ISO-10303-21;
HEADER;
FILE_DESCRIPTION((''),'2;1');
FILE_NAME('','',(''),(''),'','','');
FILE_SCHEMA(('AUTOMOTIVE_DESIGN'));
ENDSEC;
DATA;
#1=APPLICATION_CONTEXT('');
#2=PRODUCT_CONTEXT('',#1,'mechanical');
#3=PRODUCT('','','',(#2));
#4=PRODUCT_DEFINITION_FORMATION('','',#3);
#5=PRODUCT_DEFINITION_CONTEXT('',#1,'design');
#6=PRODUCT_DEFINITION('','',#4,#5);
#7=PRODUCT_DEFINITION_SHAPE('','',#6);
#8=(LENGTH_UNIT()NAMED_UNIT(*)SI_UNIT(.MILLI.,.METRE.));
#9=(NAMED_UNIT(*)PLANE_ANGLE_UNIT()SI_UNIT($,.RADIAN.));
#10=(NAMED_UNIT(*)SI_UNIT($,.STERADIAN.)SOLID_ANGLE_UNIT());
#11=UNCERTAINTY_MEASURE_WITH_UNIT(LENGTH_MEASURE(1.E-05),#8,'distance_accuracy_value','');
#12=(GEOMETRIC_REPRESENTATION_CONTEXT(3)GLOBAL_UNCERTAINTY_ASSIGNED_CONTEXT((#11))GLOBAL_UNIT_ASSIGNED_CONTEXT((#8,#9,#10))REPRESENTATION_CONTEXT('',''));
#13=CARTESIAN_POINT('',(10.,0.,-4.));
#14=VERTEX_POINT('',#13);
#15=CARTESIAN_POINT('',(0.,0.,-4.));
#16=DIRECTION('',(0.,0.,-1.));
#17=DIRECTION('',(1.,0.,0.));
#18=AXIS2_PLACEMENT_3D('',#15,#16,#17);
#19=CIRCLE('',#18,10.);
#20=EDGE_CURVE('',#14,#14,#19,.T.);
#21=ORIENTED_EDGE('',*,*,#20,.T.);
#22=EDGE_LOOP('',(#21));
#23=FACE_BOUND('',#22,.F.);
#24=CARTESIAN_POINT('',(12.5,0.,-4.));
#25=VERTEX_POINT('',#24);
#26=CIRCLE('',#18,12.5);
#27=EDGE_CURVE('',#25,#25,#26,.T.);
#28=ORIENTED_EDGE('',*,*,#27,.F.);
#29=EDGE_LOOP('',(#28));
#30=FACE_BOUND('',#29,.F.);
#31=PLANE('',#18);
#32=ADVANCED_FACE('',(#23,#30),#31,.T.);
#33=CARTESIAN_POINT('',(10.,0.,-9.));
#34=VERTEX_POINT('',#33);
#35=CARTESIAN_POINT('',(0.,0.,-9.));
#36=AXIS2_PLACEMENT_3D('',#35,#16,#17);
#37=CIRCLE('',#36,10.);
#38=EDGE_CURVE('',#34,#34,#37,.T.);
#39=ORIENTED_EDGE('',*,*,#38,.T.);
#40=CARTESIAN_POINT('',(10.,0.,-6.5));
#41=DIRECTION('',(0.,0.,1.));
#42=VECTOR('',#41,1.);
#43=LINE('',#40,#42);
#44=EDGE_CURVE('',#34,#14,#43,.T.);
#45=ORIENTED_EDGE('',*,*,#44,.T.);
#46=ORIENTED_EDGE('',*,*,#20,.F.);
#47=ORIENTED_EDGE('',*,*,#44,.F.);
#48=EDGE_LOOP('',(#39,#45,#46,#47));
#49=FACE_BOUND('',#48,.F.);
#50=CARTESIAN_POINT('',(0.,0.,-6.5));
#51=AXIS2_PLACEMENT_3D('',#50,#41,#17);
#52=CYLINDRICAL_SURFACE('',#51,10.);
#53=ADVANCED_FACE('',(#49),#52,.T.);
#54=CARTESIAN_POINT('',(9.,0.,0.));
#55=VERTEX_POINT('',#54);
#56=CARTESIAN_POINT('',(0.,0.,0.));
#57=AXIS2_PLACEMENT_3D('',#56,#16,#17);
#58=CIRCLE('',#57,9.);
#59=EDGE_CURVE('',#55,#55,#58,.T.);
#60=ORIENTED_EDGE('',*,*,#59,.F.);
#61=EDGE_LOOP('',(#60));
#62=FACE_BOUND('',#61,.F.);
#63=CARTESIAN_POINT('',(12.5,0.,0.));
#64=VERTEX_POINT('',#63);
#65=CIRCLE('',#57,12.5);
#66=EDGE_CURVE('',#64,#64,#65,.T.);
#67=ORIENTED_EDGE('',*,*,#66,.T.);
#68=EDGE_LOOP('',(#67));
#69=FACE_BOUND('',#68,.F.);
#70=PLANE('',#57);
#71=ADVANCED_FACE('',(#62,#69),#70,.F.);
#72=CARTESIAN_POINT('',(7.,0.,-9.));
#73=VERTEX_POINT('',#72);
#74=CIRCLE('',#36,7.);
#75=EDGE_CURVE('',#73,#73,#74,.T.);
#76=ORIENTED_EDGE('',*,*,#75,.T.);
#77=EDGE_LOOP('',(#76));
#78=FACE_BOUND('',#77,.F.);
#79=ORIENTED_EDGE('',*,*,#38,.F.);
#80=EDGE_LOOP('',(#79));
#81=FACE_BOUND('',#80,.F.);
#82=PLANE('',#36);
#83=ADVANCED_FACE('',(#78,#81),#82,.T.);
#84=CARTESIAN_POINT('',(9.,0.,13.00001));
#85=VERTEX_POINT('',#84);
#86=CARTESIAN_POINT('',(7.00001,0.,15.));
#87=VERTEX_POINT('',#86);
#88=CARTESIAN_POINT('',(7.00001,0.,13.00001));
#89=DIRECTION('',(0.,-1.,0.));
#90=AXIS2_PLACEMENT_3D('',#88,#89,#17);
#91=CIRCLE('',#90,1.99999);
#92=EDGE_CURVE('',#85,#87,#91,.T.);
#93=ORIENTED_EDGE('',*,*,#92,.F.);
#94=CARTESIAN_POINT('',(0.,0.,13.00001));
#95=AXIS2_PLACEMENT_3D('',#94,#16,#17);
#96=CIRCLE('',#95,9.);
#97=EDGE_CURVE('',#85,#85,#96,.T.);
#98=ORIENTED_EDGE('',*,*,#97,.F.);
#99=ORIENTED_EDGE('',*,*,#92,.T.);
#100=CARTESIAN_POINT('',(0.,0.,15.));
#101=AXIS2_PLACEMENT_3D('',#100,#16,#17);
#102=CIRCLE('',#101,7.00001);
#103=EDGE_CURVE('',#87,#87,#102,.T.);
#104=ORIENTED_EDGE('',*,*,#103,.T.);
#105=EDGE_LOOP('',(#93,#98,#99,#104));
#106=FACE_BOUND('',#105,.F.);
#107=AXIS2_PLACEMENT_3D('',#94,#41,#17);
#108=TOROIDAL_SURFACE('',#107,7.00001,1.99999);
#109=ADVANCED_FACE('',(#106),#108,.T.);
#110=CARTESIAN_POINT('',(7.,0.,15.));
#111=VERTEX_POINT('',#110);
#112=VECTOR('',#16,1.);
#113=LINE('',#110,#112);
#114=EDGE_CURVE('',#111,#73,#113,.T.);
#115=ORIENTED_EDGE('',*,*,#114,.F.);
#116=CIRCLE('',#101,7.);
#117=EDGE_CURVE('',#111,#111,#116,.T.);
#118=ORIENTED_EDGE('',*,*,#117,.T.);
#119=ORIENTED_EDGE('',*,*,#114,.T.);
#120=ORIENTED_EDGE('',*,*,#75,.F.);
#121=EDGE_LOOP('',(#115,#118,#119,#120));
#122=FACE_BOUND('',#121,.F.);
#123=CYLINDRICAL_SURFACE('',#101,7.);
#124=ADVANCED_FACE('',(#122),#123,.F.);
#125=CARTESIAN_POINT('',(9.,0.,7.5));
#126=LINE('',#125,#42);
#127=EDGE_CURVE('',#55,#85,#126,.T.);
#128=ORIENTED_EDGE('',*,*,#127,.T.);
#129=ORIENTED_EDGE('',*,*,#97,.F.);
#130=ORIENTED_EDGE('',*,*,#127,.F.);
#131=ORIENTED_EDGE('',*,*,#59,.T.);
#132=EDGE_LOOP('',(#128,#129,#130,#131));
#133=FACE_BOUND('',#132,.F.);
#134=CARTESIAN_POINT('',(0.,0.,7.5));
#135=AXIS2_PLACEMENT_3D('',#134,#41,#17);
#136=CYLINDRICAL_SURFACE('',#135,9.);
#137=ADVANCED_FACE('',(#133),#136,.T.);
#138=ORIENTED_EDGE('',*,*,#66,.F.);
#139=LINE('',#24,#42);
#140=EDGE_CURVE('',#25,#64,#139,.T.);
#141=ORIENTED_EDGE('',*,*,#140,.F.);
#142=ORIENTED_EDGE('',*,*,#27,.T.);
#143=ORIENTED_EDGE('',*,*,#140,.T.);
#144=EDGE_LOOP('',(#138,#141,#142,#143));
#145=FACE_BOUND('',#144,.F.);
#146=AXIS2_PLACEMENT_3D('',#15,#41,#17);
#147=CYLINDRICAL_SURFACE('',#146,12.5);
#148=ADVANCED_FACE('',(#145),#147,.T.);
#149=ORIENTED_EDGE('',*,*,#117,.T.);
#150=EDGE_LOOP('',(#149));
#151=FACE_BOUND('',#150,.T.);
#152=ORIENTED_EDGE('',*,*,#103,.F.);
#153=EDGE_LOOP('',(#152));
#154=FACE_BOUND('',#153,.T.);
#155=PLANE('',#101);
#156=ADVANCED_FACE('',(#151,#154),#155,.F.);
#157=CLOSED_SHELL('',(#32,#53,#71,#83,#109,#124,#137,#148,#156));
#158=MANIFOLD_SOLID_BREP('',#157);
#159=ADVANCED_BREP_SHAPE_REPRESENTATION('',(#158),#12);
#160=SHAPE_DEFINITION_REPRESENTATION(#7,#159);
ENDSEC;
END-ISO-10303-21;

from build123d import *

# Parameters (mm, degrees)
F0_W   = 2
F0_H   = 15
F0_W_2 = 3
F0_H_2 = 5
F2_R   = 1.99999


# Not quite as in the source:
# - a fillet or chamfer is up to 0.001 mm smaller than in the source, because OpenCascade refuses the exact size


with BuildPart() as f1:
    # F0 (on Front) → F1 (revolve)
    with BuildSketch(Plane.XZ):
        with Locations((8, 7.5)):
            Rectangle(F0_W, F0_H)
        Polygon((9, 0), (7, 0), (7, -4), (10, -4), (12.5, -4), (12.5, 0), align=None)
        with Locations((8.5, -6.5)):
            Rectangle(F0_W_2, F0_H_2)
    revolve(axis=Axis((0, 0, 7.5), (0, 0, -1)))

    # F2 (radius 2 in the source; OpenCascade refuses exactly that, so slightly less here)
    f2_edges = [f1.edges().sort_by_distance(p)[0] for p in [
        (-9, 0, 15),
    ]]
    fillet(f2_edges, radius=F2_R)


solid = f1.part
